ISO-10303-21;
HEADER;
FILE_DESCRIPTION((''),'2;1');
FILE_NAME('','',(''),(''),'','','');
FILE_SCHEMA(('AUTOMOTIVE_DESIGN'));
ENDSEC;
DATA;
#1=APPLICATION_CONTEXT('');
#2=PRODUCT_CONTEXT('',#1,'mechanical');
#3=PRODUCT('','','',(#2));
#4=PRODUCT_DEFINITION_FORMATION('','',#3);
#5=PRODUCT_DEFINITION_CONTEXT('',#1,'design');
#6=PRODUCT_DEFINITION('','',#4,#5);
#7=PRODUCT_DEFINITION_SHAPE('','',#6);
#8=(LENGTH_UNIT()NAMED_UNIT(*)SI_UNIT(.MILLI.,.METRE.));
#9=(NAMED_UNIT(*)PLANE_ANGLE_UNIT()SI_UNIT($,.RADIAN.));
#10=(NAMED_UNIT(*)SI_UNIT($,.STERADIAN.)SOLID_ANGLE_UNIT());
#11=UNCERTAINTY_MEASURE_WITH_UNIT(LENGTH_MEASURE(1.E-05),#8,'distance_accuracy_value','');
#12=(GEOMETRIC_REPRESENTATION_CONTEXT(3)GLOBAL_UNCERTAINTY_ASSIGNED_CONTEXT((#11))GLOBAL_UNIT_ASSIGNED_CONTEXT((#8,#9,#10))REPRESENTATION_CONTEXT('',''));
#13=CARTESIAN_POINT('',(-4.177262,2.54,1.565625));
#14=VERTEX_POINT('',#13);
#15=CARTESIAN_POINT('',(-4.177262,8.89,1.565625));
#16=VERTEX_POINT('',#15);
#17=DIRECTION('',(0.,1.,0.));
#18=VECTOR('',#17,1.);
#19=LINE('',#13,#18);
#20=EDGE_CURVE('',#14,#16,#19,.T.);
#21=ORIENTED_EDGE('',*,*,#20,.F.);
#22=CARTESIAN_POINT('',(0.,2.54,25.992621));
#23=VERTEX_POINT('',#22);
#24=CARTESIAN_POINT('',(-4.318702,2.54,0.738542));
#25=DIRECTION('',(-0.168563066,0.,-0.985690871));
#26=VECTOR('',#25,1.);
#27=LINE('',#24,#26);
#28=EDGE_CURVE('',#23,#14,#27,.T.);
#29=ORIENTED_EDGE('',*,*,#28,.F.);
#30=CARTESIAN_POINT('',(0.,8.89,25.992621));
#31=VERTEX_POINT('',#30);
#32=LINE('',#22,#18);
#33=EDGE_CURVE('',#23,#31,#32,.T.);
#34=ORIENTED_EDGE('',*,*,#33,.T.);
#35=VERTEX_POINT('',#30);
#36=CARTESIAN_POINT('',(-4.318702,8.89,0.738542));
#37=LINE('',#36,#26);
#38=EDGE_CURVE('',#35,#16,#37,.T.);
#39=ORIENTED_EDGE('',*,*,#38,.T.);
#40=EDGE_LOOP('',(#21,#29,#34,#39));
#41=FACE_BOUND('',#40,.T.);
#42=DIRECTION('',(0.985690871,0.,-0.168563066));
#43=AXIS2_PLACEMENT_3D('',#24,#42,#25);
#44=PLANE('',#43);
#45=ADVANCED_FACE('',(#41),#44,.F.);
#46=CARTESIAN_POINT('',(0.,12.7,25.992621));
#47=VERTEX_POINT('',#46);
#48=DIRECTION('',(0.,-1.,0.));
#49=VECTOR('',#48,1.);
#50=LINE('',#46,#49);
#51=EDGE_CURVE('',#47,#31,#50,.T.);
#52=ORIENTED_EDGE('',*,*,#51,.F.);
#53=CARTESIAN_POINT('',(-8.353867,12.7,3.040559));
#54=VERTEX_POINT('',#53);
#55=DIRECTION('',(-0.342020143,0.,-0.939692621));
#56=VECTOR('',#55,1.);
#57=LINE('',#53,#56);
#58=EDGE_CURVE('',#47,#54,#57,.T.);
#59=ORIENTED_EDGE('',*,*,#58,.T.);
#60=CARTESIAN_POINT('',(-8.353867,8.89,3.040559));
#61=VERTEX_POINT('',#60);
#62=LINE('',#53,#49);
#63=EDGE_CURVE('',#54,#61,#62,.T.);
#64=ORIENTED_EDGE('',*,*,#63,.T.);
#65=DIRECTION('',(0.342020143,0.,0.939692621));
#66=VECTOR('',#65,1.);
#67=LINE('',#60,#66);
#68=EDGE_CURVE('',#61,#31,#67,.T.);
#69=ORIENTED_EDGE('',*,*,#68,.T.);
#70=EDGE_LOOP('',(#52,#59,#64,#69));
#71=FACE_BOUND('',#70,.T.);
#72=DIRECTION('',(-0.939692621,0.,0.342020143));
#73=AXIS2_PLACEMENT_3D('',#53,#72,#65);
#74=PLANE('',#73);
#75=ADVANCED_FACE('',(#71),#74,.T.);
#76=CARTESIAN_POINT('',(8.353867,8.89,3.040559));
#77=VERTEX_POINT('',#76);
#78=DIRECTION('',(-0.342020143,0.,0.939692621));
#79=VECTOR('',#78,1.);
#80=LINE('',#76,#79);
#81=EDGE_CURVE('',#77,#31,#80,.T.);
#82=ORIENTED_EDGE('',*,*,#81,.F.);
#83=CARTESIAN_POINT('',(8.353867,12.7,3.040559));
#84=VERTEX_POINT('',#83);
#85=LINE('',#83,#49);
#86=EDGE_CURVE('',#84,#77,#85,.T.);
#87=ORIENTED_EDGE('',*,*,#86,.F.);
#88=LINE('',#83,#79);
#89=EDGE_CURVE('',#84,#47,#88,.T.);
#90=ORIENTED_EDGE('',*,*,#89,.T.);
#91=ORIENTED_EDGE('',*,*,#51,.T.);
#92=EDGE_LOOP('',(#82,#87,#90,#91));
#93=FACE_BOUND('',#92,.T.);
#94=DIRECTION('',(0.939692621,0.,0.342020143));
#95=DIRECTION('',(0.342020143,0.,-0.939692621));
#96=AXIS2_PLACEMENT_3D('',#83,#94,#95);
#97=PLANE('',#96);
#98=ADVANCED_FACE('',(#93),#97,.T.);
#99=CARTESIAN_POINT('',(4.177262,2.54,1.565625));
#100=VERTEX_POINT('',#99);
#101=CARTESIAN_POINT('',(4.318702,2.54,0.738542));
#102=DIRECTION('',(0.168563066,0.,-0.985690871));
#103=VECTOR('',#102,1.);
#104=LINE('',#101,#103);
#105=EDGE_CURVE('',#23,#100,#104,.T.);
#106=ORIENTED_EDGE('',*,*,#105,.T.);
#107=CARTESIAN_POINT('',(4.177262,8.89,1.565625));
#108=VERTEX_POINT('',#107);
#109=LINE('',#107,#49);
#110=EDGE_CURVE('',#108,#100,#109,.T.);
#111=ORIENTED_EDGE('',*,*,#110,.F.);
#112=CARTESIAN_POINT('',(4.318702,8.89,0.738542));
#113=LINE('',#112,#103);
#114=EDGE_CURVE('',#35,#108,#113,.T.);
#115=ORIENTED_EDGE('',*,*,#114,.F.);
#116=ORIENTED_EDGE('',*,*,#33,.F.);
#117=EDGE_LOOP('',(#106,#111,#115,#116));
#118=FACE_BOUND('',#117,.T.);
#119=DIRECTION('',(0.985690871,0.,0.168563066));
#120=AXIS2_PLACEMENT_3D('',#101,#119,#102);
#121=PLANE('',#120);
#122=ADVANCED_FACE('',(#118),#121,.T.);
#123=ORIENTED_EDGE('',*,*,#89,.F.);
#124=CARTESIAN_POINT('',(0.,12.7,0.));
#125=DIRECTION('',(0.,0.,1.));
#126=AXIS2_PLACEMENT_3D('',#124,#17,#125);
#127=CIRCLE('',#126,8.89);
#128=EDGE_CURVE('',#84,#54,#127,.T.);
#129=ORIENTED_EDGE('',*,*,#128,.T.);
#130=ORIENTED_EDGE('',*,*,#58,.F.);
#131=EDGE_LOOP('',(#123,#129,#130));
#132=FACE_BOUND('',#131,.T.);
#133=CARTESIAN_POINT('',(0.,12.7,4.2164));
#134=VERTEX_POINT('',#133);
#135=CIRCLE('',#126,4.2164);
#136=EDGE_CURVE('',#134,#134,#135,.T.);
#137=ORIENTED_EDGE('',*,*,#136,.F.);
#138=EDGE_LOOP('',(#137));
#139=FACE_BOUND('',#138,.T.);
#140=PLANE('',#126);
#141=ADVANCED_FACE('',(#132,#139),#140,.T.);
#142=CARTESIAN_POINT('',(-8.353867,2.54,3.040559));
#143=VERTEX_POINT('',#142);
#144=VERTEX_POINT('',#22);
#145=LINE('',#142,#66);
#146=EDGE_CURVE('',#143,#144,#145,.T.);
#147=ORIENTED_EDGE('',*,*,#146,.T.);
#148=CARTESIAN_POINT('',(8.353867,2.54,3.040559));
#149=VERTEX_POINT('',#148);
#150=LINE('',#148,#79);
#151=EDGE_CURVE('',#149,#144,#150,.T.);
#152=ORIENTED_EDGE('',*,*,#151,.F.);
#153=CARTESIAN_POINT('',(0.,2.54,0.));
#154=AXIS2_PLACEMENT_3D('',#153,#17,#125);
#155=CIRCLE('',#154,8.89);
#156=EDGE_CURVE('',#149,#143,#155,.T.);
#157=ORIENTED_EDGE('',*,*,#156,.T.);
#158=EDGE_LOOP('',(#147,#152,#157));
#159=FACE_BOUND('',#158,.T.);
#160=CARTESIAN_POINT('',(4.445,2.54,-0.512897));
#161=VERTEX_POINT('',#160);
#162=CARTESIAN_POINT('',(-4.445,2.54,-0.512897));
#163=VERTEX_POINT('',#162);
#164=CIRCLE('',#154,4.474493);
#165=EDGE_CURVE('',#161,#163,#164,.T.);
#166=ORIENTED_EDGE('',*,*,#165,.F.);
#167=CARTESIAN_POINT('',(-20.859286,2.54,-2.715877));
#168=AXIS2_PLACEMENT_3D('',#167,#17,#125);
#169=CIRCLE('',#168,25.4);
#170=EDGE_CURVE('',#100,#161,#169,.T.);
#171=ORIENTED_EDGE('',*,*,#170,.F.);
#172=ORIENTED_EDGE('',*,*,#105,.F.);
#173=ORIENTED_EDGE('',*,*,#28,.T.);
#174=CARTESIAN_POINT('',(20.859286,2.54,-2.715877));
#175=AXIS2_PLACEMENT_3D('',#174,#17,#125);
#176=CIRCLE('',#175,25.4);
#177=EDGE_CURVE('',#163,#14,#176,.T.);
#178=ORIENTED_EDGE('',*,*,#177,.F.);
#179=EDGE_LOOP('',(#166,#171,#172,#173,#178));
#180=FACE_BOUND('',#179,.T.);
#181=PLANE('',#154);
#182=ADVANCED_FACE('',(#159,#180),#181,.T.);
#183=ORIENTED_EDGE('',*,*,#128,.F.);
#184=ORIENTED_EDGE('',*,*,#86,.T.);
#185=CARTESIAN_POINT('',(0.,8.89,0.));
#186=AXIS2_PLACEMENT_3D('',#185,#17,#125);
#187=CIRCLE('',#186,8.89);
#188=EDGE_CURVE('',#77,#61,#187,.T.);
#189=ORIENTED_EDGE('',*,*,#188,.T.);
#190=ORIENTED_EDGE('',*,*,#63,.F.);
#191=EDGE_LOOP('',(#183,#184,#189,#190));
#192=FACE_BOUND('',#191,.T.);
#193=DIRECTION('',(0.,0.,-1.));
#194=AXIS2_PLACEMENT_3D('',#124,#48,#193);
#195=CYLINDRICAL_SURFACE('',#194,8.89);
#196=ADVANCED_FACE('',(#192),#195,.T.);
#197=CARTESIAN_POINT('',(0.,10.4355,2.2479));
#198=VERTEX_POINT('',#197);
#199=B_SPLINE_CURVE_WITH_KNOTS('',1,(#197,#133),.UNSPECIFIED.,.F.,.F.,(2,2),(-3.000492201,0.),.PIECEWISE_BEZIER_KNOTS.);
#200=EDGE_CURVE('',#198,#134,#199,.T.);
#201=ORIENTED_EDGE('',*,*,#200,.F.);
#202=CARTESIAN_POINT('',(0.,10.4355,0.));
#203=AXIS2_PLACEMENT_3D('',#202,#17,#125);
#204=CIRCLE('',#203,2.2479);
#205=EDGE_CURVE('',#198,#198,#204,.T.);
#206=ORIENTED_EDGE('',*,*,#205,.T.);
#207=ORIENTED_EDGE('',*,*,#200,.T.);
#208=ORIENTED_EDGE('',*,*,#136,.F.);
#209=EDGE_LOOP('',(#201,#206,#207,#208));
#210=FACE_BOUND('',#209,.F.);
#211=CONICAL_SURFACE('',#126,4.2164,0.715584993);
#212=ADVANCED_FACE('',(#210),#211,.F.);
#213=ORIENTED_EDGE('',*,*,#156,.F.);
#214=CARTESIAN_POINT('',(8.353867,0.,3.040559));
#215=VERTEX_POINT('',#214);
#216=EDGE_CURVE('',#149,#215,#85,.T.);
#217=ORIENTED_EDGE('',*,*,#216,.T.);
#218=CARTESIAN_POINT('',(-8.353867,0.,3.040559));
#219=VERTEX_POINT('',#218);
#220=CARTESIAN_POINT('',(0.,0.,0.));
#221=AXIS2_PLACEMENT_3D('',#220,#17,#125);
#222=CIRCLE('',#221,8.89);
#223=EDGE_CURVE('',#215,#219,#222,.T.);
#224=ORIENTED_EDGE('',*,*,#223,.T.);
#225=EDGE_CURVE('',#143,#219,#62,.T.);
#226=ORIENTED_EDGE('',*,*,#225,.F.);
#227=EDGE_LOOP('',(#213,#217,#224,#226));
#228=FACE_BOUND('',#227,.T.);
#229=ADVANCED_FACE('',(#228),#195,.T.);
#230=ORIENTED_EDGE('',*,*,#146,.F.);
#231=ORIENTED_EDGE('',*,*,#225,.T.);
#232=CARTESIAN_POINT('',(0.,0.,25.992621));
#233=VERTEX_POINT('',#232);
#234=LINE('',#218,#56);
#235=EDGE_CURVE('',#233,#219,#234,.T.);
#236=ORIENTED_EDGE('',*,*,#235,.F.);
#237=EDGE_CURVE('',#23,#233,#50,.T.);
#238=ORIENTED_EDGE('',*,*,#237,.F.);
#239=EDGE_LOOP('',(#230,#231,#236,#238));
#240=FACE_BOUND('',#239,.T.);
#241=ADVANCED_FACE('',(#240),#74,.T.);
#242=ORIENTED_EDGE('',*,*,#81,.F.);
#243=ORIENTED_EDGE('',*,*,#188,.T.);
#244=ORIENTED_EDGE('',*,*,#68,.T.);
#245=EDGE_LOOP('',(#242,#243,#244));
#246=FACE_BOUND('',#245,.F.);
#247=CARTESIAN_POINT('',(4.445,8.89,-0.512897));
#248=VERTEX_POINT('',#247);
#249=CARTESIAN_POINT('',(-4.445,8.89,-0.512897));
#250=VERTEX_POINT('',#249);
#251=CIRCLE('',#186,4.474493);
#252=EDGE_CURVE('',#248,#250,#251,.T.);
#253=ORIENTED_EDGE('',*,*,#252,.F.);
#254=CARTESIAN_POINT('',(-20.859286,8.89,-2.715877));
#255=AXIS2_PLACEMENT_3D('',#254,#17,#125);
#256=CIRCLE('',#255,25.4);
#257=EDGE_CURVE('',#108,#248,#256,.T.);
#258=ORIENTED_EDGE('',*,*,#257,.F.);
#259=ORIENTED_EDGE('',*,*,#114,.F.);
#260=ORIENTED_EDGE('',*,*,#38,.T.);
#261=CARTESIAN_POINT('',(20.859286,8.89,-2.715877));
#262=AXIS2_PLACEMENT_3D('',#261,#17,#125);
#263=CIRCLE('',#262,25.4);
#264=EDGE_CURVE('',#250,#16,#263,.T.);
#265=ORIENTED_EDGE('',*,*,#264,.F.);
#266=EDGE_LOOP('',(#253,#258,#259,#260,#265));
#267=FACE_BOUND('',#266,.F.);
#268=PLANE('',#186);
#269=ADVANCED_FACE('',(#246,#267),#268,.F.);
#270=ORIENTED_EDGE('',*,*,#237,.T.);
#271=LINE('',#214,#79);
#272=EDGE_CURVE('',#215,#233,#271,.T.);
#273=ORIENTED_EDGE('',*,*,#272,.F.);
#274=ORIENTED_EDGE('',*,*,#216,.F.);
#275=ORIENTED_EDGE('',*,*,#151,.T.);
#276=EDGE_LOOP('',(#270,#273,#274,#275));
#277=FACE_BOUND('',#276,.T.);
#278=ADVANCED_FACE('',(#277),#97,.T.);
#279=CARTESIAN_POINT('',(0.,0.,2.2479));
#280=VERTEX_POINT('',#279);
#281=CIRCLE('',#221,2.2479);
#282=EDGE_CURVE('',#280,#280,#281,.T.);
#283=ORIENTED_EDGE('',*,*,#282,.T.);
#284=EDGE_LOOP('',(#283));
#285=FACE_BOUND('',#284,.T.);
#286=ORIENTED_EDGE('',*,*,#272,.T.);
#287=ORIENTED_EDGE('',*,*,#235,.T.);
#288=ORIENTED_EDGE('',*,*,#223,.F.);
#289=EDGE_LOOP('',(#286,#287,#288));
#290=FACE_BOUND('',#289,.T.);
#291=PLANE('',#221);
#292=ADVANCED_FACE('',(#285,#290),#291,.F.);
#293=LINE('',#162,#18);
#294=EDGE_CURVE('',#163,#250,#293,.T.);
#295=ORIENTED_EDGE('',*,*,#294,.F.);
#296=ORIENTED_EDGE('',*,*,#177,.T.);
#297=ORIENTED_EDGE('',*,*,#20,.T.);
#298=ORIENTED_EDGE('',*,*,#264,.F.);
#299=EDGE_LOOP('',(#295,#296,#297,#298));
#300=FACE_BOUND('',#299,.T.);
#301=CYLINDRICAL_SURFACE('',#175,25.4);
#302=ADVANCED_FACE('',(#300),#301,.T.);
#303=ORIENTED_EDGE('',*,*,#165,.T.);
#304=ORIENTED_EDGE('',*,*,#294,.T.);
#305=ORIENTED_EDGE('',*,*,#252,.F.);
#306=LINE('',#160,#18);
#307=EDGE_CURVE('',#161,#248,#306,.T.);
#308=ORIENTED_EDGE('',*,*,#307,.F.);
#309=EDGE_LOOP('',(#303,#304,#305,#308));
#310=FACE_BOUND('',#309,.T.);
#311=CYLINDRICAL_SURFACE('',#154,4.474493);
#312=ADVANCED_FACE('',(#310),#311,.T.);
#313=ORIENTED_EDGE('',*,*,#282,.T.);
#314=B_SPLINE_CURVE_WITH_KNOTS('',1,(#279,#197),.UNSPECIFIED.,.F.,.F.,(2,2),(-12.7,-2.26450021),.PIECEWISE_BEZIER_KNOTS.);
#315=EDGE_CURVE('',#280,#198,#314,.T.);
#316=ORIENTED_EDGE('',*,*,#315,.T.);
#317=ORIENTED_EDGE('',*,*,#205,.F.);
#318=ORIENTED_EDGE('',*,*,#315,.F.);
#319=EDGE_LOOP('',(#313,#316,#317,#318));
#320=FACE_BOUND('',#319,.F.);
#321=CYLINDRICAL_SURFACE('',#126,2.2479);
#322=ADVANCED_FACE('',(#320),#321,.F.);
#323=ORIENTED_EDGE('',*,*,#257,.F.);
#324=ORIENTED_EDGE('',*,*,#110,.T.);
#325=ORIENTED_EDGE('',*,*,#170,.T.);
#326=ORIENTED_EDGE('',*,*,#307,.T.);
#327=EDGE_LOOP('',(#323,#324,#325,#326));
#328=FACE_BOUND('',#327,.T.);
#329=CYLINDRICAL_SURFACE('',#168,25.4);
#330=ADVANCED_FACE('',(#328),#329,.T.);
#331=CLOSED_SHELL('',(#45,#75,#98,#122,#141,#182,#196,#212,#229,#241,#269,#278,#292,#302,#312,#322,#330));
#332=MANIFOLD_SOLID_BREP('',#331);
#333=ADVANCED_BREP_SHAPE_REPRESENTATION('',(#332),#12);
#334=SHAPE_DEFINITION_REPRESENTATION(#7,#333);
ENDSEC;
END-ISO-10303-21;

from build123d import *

# Parameters (mm, degrees)
SKETCH1_R                                      = 8.89
BOSS_EXTRUDE1_DEPTH                            = 12.7
CUT_EXTRUDE2_START                             = -10.16
CUT_EXTRUDE2_DEPTH                             = 6.35
CSK_FOR_8_FLAT_HEAD_MACHINE_SCREW1_D           = 4.4958
CSK_FOR_8_FLAT_HEAD_MACHINE_SCREW1_CSINK_D     = 8.4328
CSK_FOR_8_FLAT_HEAD_MACHINE_SCREW1_CSINK_ANGLE = 82
FILLET1_R                                      = 25.4


with BuildPart() as part:
    # Sketch1 → Boss-Extrude1 (new body)
    with BuildSketch(Plane(origin=(0, 0, 0), x_dir=(1, 0, 0), z_dir=(0, 1, 0))):
        Circle(SKETCH1_R)
        with BuildLine():
            Line((0, -25.992621117), (8.353867399, -3.040559074))
            ThreePointArc((8.353867399, -3.040559074), (0, -8.89), (-8.353867399, -3.040559074))
            Line((-8.353867399, -3.040559074), (0, -25.992621117))
        make_face()
    extrude(amount=BOSS_EXTRUDE1_DEPTH)

    # Sketch5 → Cut-Extrude2 (cut)
    with BuildSketch(Plane(origin=(0, 12.7, 0), x_dir=(1, 0, 0), z_dir=(0, 1, 0)).offset(CUT_EXTRUDE2_START)):
        with BuildLine():
            Line((-4.445, 0), (-4.445, 0.512896595))
            ThreePointArc((-4.445, 0.512896595), (-2.977090499, 3.340362268), (0, 4.474493035))
            Line((0, 4.474493035), (0, 8.89))
            ThreePointArc((0, 8.89), (-7.282261674, 5.099094519), (-8.353867399, -3.040559074))
            Line((-8.353867399, -3.040559074), (0, -25.992621117))
            Line((0, -25.992621117), (-4.445, 0))
        make_face()
    cut_extrude2 = extrude(amount=CUT_EXTRUDE2_DEPTH, mode=Mode.SUBTRACT)

    # CSK for #8 Flat Head Machine Screw1 (through all)
    with Locations(Plane(origin=(0, 12.7, 0), x_dir=(1, 0, 0), z_dir=(0, 1, 0))):
        with Locations((0, 0)):
            CounterSinkHole(CSK_FOR_8_FLAT_HEAD_MACHINE_SCREW1_D / 2, CSK_FOR_8_FLAT_HEAD_MACHINE_SCREW1_CSINK_D / 2, counter_sink_angle=CSK_FOR_8_FLAT_HEAD_MACHINE_SCREW1_CSINK_ANGLE)

    # Mirror1: Cut-Extrude2 across plane
    add(cut_extrude2.mirror(Plane(origin=(0, 0, 0), x_dir=(0, 0, 1), z_dir=(1, 0, 0))), mode=Mode.SUBTRACT)

    # Fillet1
    # the kernel refuses this fillet: 25.4 mm, written as the material it takes off along each edge
    with BuildSketch(Plane(origin=(-4.445, 2.54, 0), x_dir=(0, 0, -1), z_dir=(0, 1, 0))) as fillet1_piece_1:
        with BuildLine():
            CenterArc((2.715876885, -25.30428576), FILLET1_R, 94.975600716, 4.728682493)
            Line((-1.565625003, -0.267737644), (-1.65125504, 0.232993318))
            Line((-1.65125504, 0.232993318), (-0.085630038, 0.500730962))
            Line((-0.085630038, 0.500730962), (0, 0.508))
            ThreePointArc((0, 0.508), (0.256448297, 0.508), (0.468836989, 0.506085715))
            Line((0.468836989, 0.506085715), (0.512896595, 0))
        make_face()
    extrude(amount=6.35, mode=Mode.SUBTRACT)
    with BuildSketch(Plane(origin=(4.445, 2.54, 0), x_dir=(-0.16856306644022723, 0, 0.9856908707258414), z_dir=(0, 1, 0))) as fillet1_piece_2:
        with BuildLine():
            CenterArc((1.58835295, -25.4), FILLET1_R, 90, 4.728682493)
            Line((-0.505557491, -0.086455423), (-0.5474357, 0.419815469))
            ThreePointArc((-0.5474357, 0.419815469), (-0.338408783, 0.457503251), (-0.085630038, 0.500730962))
            Line((-0.085630038, 0.500730962), (0, 0.508))
            Line((0, 0.508), (1.58835295, 0.508))
            Line((1.58835295, 0.508), (1.58835295, 0))
        make_face()
    extrude(amount=6.35, mode=Mode.SUBTRACT)


solid = part.part
